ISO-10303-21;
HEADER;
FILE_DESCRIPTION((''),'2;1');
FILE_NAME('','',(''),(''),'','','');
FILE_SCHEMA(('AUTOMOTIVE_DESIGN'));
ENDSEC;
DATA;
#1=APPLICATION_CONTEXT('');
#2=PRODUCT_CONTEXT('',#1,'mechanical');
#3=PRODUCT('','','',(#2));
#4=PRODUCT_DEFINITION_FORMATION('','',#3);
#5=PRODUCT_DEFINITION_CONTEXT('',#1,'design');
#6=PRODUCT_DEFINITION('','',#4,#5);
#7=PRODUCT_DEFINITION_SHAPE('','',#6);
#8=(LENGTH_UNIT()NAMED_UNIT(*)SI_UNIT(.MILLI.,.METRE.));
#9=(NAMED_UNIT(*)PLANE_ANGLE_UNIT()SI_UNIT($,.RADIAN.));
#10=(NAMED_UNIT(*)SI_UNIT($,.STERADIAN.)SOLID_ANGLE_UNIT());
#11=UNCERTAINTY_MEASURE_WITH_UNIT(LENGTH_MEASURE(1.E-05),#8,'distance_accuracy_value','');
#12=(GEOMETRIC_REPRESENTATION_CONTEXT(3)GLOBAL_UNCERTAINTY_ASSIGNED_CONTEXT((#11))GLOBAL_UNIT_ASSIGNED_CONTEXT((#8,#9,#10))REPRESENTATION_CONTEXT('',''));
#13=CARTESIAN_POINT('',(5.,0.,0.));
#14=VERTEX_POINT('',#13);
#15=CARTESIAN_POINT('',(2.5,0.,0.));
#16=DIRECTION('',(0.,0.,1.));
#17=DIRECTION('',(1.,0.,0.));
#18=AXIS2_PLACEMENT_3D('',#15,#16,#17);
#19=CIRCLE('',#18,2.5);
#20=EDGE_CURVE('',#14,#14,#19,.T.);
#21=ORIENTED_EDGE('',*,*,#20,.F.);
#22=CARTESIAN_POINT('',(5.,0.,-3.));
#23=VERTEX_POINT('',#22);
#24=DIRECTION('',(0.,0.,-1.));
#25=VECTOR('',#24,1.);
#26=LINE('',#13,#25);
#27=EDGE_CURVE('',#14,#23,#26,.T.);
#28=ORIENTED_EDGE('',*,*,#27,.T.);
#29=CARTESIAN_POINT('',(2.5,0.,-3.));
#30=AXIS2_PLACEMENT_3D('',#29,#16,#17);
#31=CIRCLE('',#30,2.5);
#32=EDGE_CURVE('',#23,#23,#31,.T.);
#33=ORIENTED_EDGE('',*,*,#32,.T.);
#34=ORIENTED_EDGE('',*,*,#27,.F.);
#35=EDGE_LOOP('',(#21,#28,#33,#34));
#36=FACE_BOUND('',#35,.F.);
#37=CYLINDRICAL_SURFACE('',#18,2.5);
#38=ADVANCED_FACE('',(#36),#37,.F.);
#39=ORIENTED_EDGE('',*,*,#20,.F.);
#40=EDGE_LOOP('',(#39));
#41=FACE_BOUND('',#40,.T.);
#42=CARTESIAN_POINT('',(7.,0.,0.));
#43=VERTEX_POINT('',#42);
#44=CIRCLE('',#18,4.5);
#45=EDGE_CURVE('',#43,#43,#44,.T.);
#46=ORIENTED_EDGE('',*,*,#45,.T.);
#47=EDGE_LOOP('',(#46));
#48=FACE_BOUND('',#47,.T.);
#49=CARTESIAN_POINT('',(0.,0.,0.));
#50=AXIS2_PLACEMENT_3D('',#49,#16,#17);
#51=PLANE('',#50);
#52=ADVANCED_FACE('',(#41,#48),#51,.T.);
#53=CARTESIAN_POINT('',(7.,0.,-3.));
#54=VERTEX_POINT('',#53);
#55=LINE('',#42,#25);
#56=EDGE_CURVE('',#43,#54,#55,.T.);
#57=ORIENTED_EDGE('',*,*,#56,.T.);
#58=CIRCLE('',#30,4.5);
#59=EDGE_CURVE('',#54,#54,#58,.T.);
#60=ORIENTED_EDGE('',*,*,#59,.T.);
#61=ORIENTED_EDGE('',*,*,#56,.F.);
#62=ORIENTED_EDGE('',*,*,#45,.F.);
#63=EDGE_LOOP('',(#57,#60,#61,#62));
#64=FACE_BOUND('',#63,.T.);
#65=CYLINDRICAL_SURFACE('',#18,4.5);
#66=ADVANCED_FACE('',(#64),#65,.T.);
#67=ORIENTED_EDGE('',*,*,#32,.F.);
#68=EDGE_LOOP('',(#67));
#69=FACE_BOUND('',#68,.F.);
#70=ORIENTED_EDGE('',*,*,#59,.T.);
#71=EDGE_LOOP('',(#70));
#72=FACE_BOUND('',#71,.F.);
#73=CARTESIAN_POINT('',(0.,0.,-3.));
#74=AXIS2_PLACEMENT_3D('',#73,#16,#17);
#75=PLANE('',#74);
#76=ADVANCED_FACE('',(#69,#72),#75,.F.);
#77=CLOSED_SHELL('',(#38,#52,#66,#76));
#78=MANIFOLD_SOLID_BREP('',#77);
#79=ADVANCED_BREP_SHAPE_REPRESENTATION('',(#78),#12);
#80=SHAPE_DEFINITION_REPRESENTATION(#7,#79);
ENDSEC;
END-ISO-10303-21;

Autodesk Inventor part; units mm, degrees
ref_plane "YZ Plane" through (0, 0, 0) normal (1, 0, 0) x (0, 1, 0)
ref_plane "XZ Plane" through (0, 0, 0) normal (0, 1, 0) x (-1, 0, 0)
sketch "Sketch1" plane through (0, 0, 0) normal (0, 0, 1) x (1, 0, 0)
  circle A0 centre (2.5, 0) radius 2.5 projected
  circle A1 centre (2.5, 0) radius 4.5
  point P0 (0, 0)
  dimension "d0" = 9
ref_plane "Work Plane1" through (-2.5, -5, -5) normal (0, 0, 1) x (1, 0, 0)
extrude "Extrusion2" add sketch "Sketch1" against normal blind 3
properties part number "small_bearing" material "Steel, Alloy"
